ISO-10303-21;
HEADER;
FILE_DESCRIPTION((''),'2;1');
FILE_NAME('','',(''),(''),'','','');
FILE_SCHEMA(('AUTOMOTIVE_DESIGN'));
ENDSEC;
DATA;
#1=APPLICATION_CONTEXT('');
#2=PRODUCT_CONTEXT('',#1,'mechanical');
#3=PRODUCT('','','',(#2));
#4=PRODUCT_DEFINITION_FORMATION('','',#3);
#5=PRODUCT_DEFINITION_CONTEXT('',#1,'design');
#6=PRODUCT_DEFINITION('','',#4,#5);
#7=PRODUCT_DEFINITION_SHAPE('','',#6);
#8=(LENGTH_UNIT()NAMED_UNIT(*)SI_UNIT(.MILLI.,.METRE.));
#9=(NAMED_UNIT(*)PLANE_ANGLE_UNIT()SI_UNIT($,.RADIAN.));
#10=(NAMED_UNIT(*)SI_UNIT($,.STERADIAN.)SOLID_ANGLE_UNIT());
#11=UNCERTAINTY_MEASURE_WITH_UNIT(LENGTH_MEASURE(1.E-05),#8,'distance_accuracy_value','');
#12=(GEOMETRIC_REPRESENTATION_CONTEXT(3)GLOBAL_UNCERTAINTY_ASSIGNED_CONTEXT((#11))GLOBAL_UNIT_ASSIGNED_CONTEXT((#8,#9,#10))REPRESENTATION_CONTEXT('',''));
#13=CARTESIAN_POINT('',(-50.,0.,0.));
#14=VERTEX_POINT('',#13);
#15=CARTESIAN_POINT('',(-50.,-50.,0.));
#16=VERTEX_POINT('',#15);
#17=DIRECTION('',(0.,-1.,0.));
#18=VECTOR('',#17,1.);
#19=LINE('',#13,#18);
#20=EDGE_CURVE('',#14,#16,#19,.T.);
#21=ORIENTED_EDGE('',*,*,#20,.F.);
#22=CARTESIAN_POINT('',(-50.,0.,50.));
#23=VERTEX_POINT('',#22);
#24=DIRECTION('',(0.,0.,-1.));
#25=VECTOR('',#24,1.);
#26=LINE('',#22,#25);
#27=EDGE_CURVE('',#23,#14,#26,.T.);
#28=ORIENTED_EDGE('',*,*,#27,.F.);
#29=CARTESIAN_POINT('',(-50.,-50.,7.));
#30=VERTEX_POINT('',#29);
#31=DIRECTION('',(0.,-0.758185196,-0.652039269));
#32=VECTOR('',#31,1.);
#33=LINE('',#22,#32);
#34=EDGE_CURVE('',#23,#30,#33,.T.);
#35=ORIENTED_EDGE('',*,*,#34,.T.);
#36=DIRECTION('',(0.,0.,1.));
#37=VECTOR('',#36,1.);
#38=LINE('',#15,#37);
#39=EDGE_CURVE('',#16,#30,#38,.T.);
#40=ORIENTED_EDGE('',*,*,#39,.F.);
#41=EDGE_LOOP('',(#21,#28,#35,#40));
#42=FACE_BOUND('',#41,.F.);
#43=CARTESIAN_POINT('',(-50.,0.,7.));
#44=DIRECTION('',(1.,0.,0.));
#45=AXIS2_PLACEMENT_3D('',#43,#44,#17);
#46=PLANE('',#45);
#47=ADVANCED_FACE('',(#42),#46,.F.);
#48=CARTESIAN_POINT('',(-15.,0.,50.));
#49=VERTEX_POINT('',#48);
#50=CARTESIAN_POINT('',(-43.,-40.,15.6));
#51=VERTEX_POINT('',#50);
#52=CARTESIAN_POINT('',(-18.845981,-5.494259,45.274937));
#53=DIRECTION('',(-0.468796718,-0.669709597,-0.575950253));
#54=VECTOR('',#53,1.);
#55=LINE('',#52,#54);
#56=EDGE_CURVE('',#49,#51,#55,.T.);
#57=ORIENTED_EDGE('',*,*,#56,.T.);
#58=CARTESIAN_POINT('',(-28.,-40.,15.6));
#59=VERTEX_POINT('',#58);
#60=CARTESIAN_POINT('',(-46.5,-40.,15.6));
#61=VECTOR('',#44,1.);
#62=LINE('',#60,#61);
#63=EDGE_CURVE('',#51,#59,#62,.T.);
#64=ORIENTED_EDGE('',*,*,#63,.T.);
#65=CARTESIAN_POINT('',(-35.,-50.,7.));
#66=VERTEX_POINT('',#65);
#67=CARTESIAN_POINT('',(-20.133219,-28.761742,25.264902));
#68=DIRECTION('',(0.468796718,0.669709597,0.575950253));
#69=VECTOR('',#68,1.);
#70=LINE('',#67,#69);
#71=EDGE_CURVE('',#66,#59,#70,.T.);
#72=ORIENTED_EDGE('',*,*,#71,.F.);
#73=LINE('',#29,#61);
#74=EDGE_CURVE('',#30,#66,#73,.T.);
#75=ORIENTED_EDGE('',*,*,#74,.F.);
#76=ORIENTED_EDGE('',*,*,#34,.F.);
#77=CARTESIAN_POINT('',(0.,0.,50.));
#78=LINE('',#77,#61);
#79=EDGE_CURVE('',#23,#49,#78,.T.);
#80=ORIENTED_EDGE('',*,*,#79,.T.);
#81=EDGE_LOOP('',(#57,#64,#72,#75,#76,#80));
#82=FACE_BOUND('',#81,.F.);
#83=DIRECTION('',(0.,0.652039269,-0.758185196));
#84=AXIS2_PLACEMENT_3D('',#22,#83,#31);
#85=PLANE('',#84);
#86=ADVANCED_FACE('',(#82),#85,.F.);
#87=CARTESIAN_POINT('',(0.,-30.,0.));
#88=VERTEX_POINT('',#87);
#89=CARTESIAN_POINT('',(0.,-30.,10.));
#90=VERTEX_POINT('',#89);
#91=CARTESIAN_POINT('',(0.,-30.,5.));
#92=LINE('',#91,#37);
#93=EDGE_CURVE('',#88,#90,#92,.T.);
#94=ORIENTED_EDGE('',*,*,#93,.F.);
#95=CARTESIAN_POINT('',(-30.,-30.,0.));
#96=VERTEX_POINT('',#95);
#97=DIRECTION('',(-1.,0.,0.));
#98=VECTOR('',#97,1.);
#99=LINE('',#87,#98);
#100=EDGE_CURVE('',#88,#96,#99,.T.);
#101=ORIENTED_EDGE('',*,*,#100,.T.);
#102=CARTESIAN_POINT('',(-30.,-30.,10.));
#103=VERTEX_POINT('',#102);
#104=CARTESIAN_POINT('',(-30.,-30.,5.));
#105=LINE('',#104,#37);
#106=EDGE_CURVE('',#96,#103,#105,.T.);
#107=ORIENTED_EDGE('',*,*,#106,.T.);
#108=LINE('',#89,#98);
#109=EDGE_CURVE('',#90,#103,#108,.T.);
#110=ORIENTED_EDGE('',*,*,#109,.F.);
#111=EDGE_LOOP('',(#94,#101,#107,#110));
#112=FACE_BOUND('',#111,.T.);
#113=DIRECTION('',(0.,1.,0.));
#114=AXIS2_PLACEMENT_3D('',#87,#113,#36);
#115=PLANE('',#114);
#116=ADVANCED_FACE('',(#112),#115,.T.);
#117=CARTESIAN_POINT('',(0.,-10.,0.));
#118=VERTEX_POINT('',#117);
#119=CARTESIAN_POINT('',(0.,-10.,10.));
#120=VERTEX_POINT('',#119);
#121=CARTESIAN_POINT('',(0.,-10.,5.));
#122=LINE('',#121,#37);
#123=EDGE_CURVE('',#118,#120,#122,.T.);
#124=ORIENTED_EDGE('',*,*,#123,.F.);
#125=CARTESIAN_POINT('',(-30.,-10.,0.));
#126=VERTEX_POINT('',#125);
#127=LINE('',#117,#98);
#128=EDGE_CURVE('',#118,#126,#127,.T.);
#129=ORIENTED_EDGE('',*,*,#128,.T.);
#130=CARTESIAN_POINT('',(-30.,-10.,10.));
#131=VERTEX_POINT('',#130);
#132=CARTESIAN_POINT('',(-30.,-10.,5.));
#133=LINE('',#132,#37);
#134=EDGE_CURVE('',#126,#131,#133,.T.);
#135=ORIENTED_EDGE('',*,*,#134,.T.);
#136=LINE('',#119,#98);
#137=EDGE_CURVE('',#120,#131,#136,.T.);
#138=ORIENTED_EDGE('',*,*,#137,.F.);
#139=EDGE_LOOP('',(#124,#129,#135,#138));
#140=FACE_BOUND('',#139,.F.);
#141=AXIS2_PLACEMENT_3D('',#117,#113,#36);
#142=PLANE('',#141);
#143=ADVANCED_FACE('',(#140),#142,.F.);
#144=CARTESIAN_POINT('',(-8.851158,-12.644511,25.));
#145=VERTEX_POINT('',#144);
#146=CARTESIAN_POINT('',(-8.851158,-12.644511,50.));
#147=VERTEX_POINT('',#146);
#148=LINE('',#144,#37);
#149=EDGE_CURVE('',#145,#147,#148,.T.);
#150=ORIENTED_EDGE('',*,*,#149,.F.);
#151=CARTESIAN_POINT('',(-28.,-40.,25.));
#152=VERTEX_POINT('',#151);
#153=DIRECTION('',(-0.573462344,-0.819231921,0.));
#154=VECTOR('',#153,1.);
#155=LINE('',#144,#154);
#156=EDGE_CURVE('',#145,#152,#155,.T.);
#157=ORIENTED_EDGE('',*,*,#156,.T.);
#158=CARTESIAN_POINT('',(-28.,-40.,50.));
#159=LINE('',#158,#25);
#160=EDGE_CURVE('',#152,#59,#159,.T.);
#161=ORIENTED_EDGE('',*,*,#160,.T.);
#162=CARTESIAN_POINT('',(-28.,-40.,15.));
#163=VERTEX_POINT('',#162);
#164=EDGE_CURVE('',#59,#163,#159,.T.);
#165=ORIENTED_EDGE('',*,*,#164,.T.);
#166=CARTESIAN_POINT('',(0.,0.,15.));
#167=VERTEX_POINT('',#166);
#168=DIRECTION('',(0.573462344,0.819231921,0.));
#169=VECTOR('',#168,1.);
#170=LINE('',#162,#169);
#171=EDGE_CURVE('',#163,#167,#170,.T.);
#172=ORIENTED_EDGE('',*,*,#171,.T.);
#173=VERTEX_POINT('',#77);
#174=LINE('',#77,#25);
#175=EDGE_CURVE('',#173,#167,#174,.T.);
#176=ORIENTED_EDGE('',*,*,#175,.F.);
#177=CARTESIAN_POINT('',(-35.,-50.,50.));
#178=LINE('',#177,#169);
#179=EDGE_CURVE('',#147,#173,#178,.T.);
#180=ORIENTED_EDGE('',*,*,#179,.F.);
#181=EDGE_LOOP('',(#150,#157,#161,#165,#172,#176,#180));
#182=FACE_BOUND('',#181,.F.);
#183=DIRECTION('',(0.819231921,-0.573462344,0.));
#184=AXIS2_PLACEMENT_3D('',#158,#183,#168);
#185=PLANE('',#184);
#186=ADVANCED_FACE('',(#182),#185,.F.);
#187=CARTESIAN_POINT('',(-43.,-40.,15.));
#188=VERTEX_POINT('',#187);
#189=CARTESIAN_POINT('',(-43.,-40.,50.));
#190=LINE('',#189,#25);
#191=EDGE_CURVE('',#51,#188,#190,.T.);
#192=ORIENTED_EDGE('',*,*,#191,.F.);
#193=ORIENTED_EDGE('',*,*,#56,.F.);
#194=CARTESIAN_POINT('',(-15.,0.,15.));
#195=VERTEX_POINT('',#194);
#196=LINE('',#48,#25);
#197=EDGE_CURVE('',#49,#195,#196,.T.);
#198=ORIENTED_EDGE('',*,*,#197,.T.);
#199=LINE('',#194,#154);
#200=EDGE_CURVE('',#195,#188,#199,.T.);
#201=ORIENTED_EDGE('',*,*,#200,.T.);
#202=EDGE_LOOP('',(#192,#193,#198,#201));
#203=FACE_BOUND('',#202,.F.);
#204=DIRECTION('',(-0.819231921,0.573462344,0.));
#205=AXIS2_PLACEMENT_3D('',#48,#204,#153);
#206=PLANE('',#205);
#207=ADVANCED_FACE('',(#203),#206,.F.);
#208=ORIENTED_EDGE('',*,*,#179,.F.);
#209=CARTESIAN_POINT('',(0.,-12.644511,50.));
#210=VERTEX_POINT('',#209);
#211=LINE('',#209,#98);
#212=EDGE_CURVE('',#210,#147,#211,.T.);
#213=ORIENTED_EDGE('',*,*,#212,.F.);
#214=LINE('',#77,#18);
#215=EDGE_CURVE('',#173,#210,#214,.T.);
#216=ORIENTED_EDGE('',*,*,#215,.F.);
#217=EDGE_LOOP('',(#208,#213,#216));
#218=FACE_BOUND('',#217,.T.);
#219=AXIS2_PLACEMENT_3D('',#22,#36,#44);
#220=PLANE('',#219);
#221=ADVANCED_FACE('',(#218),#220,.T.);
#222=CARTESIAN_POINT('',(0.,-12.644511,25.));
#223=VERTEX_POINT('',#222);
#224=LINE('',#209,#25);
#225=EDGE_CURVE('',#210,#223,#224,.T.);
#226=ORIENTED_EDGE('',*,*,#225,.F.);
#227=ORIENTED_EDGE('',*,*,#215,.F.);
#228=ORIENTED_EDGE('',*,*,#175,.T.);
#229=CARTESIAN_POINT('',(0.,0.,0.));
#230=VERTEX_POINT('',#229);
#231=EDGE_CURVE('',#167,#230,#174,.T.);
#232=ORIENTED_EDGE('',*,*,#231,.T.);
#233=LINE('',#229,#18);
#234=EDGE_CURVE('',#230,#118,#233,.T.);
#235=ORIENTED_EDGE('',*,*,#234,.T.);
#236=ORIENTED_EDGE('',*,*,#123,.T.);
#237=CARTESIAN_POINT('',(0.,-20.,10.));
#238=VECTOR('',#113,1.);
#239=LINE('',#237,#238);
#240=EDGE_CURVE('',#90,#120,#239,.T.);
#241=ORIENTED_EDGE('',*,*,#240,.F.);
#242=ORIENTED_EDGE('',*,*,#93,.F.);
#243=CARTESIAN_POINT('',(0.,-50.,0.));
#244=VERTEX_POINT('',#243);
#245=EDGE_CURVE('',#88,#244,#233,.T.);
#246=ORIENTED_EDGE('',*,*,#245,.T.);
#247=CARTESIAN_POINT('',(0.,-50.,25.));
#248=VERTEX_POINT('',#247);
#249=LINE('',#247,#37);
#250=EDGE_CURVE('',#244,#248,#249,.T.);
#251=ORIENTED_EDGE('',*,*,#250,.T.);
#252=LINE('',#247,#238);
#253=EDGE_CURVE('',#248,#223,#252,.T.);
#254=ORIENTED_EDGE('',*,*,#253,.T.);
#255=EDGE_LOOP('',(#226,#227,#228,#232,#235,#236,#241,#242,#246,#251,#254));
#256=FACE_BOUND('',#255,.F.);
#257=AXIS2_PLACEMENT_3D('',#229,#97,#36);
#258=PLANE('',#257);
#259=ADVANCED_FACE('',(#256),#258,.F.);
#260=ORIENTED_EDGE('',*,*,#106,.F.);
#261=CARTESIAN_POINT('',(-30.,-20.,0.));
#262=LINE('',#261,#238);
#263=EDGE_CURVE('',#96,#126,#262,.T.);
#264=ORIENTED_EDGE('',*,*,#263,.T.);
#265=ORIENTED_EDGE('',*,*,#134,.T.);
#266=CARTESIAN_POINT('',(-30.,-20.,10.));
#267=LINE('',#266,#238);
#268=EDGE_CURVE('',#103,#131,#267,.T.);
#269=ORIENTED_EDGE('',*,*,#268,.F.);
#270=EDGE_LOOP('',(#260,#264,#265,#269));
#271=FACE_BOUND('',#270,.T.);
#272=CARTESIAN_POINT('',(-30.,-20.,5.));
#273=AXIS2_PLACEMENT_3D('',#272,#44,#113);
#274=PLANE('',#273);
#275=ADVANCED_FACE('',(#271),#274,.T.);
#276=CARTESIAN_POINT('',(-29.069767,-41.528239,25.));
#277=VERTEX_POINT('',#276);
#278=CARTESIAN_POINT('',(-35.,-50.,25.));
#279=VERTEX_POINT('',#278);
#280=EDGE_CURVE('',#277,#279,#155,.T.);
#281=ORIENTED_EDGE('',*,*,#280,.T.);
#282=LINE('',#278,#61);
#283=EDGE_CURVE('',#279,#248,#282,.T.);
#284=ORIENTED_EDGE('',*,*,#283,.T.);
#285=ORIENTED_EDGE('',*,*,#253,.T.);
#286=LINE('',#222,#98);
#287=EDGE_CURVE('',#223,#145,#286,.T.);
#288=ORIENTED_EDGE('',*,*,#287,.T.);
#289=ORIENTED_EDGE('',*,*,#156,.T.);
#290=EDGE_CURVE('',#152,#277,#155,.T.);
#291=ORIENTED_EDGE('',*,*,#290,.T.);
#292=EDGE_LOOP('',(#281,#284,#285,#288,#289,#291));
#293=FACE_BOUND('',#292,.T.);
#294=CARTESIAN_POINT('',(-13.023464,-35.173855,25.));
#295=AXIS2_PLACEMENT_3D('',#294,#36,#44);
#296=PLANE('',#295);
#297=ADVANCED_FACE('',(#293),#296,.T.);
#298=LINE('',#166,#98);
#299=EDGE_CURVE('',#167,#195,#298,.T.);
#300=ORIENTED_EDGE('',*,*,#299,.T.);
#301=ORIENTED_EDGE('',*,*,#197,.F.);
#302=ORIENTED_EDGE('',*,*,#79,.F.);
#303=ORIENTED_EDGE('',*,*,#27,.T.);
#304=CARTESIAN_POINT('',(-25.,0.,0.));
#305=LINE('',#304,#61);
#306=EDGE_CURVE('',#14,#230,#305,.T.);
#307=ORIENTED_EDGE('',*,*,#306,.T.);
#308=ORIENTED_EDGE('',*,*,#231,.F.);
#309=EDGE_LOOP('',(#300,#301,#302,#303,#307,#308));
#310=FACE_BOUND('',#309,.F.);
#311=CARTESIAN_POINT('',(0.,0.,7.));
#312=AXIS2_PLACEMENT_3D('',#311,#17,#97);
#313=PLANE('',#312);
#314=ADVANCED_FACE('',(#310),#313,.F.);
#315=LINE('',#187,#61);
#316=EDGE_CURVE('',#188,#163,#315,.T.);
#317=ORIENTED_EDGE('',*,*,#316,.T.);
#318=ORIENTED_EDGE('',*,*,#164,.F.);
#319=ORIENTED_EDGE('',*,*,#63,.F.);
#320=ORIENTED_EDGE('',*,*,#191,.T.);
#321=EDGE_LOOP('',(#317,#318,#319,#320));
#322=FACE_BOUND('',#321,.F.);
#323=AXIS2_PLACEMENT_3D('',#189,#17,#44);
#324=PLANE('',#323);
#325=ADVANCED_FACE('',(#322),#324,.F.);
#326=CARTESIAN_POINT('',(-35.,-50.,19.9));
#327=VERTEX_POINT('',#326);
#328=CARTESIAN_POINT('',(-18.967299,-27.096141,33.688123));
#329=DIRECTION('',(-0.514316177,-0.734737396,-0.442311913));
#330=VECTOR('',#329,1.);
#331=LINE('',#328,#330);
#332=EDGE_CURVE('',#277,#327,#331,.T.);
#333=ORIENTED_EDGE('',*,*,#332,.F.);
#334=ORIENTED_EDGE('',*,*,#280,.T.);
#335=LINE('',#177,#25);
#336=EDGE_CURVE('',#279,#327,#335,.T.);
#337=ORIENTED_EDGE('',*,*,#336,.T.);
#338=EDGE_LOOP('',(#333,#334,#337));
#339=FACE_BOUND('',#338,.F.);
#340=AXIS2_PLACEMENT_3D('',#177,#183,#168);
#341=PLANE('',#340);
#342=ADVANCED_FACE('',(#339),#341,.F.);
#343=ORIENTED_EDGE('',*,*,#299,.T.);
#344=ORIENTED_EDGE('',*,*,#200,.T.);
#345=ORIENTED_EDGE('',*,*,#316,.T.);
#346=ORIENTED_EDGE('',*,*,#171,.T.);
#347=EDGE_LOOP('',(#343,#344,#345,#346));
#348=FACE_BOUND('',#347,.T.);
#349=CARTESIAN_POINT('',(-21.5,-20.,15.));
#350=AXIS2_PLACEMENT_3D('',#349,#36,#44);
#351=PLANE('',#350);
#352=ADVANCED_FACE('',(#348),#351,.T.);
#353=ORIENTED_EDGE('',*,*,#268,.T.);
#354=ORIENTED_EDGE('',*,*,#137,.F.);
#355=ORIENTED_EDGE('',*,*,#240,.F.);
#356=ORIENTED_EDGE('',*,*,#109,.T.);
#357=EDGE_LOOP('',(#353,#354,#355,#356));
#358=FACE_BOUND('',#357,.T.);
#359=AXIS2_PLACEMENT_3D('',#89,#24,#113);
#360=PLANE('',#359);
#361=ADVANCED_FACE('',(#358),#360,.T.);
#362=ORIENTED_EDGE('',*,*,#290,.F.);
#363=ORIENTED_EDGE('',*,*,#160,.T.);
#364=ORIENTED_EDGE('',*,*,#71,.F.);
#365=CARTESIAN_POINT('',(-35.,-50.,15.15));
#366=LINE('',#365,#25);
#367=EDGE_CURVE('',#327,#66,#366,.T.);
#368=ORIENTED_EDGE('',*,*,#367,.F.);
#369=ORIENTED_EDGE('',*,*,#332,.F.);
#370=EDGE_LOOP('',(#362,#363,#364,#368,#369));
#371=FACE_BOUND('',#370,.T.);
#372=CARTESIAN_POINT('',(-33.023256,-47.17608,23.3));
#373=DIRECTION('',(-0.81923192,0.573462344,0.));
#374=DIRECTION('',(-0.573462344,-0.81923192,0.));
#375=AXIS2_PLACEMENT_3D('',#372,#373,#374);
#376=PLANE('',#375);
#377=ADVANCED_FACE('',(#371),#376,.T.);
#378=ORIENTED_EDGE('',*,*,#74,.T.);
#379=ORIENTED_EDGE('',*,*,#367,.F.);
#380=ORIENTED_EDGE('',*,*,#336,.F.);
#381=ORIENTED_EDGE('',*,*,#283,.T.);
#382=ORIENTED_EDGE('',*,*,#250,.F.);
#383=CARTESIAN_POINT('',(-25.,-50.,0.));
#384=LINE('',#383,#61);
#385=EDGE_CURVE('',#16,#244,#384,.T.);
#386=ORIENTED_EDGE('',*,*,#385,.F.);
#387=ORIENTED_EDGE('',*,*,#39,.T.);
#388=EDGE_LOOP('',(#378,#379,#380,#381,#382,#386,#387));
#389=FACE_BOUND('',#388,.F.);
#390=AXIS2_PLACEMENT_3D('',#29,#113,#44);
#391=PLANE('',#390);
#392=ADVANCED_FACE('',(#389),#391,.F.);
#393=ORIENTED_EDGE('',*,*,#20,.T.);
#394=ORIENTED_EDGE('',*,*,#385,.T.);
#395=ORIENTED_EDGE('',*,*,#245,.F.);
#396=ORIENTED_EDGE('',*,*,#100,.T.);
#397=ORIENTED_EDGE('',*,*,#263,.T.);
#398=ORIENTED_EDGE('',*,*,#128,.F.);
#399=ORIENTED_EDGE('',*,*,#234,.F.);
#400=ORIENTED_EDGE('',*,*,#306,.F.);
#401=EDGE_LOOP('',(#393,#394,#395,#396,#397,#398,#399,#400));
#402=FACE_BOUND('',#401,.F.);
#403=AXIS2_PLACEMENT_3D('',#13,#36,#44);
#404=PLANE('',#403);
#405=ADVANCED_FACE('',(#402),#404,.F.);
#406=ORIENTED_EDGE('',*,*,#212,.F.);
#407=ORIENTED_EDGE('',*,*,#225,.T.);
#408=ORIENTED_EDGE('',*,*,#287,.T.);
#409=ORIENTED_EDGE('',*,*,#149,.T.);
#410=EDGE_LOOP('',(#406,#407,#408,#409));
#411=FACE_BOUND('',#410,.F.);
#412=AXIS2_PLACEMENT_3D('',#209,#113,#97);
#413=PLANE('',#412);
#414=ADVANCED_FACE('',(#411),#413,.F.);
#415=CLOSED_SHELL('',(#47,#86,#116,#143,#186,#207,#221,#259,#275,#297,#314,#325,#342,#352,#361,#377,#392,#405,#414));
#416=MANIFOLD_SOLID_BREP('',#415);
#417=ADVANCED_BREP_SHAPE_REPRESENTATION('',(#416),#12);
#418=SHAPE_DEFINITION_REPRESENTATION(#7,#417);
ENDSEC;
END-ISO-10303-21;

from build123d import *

# Parameters (mm, degrees)
F0_W      = 50
F0_H      = 50
F1_DEPTH  = 50
F3_DEPTH  = 43
F5_DEPTH  = 25
F8_REACH  = 113.7106781187
F10_DEPTH = 35
F12_REACH = 115.9479483752
F13_W     = 20
F13_H     = 10
F14_DEPTH = 30


with BuildPart() as f1:
    # F0 (on Front) → F1 (new body)
    with BuildSketch(Plane.XZ):
        with Locations((-25, 25)):
            Rectangle(F0_W, F0_H)
    extrude(amount=F1_DEPTH)

    # F2 (on face) → F3 (cut)
    with BuildSketch(Plane.XY.offset(50)):
        Polygon((-35, -50), (0, 0), (-50, 0), (-50, -50), align=None)
    extrude(amount=-F3_DEPTH, mode=Mode.SUBTRACT)

    # F4 (on face) → F5 (cut)
    with BuildSketch(Plane.XY.offset(50)):
        Polygon((0, -12.6445109037), (-8.8511576326, -12.6445109037), (-35, -50), (0, -50), align=None)
    extrude(amount=-F5_DEPTH, mode=Mode.SUBTRACT)

    f8_end = Plane(origin=(0, 0, 50), x_dir=(0, -0.8567360565, -0.515755106), z_dir=(0, 0.515755106, -0.8567360565))
    # F6 (on face) → F8 (join, up to a plane its end follows)
    with BuildSketch(Plane.XY.offset(7)):
        Polygon((-50, 0), (-50, -50), (-35, -50), (0, 0), align=None)
    f8_long = extrude(amount=F8_REACH, mode=Mode.PRIVATE)
    add(split(f8_long, bisect_by=f8_end, keep=Keep.TOP, mode=Mode.PRIVATE))

    # F9 (on face) → F10 (cut)
    with BuildSketch(Plane.XY.offset(50)):
        Polygon((-28, -40), (0, 0), (-15, 0), (-43, -40), align=None)
    extrude(amount=-F10_DEPTH, mode=Mode.SUBTRACT)

    f12_end = Plane(origin=(-33.023255814, -47.1760797342, 23.3), x_dir=(-0.5734623444, -0.8192319205, 0), z_dir=(-0.8192319205, 0.5734623444, 0))
    # F11 (on face) → F12 (cut, up to a plane its end follows)
    with BuildSketch(Plane(origin=(-50, 0, 0), x_dir=(0, -1, 0), z_dir=(-1, 0, 0))):
        Polygon((50, 19.9), (0, 50), (50, 7), align=None)
    f12_long = extrude(amount=-F12_REACH, mode=Mode.PRIVATE)
    add(split(f12_long, bisect_by=f12_end, keep=Keep.TOP, mode=Mode.PRIVATE), mode=Mode.SUBTRACT)

    # F13 (on face) → F14 (cut)
    with BuildSketch(Plane.YZ):
        with Locations((-20, 5)):
            Rectangle(F13_W, F13_H)
    extrude(amount=-F14_DEPTH, mode=Mode.SUBTRACT)


solid = f1.part
